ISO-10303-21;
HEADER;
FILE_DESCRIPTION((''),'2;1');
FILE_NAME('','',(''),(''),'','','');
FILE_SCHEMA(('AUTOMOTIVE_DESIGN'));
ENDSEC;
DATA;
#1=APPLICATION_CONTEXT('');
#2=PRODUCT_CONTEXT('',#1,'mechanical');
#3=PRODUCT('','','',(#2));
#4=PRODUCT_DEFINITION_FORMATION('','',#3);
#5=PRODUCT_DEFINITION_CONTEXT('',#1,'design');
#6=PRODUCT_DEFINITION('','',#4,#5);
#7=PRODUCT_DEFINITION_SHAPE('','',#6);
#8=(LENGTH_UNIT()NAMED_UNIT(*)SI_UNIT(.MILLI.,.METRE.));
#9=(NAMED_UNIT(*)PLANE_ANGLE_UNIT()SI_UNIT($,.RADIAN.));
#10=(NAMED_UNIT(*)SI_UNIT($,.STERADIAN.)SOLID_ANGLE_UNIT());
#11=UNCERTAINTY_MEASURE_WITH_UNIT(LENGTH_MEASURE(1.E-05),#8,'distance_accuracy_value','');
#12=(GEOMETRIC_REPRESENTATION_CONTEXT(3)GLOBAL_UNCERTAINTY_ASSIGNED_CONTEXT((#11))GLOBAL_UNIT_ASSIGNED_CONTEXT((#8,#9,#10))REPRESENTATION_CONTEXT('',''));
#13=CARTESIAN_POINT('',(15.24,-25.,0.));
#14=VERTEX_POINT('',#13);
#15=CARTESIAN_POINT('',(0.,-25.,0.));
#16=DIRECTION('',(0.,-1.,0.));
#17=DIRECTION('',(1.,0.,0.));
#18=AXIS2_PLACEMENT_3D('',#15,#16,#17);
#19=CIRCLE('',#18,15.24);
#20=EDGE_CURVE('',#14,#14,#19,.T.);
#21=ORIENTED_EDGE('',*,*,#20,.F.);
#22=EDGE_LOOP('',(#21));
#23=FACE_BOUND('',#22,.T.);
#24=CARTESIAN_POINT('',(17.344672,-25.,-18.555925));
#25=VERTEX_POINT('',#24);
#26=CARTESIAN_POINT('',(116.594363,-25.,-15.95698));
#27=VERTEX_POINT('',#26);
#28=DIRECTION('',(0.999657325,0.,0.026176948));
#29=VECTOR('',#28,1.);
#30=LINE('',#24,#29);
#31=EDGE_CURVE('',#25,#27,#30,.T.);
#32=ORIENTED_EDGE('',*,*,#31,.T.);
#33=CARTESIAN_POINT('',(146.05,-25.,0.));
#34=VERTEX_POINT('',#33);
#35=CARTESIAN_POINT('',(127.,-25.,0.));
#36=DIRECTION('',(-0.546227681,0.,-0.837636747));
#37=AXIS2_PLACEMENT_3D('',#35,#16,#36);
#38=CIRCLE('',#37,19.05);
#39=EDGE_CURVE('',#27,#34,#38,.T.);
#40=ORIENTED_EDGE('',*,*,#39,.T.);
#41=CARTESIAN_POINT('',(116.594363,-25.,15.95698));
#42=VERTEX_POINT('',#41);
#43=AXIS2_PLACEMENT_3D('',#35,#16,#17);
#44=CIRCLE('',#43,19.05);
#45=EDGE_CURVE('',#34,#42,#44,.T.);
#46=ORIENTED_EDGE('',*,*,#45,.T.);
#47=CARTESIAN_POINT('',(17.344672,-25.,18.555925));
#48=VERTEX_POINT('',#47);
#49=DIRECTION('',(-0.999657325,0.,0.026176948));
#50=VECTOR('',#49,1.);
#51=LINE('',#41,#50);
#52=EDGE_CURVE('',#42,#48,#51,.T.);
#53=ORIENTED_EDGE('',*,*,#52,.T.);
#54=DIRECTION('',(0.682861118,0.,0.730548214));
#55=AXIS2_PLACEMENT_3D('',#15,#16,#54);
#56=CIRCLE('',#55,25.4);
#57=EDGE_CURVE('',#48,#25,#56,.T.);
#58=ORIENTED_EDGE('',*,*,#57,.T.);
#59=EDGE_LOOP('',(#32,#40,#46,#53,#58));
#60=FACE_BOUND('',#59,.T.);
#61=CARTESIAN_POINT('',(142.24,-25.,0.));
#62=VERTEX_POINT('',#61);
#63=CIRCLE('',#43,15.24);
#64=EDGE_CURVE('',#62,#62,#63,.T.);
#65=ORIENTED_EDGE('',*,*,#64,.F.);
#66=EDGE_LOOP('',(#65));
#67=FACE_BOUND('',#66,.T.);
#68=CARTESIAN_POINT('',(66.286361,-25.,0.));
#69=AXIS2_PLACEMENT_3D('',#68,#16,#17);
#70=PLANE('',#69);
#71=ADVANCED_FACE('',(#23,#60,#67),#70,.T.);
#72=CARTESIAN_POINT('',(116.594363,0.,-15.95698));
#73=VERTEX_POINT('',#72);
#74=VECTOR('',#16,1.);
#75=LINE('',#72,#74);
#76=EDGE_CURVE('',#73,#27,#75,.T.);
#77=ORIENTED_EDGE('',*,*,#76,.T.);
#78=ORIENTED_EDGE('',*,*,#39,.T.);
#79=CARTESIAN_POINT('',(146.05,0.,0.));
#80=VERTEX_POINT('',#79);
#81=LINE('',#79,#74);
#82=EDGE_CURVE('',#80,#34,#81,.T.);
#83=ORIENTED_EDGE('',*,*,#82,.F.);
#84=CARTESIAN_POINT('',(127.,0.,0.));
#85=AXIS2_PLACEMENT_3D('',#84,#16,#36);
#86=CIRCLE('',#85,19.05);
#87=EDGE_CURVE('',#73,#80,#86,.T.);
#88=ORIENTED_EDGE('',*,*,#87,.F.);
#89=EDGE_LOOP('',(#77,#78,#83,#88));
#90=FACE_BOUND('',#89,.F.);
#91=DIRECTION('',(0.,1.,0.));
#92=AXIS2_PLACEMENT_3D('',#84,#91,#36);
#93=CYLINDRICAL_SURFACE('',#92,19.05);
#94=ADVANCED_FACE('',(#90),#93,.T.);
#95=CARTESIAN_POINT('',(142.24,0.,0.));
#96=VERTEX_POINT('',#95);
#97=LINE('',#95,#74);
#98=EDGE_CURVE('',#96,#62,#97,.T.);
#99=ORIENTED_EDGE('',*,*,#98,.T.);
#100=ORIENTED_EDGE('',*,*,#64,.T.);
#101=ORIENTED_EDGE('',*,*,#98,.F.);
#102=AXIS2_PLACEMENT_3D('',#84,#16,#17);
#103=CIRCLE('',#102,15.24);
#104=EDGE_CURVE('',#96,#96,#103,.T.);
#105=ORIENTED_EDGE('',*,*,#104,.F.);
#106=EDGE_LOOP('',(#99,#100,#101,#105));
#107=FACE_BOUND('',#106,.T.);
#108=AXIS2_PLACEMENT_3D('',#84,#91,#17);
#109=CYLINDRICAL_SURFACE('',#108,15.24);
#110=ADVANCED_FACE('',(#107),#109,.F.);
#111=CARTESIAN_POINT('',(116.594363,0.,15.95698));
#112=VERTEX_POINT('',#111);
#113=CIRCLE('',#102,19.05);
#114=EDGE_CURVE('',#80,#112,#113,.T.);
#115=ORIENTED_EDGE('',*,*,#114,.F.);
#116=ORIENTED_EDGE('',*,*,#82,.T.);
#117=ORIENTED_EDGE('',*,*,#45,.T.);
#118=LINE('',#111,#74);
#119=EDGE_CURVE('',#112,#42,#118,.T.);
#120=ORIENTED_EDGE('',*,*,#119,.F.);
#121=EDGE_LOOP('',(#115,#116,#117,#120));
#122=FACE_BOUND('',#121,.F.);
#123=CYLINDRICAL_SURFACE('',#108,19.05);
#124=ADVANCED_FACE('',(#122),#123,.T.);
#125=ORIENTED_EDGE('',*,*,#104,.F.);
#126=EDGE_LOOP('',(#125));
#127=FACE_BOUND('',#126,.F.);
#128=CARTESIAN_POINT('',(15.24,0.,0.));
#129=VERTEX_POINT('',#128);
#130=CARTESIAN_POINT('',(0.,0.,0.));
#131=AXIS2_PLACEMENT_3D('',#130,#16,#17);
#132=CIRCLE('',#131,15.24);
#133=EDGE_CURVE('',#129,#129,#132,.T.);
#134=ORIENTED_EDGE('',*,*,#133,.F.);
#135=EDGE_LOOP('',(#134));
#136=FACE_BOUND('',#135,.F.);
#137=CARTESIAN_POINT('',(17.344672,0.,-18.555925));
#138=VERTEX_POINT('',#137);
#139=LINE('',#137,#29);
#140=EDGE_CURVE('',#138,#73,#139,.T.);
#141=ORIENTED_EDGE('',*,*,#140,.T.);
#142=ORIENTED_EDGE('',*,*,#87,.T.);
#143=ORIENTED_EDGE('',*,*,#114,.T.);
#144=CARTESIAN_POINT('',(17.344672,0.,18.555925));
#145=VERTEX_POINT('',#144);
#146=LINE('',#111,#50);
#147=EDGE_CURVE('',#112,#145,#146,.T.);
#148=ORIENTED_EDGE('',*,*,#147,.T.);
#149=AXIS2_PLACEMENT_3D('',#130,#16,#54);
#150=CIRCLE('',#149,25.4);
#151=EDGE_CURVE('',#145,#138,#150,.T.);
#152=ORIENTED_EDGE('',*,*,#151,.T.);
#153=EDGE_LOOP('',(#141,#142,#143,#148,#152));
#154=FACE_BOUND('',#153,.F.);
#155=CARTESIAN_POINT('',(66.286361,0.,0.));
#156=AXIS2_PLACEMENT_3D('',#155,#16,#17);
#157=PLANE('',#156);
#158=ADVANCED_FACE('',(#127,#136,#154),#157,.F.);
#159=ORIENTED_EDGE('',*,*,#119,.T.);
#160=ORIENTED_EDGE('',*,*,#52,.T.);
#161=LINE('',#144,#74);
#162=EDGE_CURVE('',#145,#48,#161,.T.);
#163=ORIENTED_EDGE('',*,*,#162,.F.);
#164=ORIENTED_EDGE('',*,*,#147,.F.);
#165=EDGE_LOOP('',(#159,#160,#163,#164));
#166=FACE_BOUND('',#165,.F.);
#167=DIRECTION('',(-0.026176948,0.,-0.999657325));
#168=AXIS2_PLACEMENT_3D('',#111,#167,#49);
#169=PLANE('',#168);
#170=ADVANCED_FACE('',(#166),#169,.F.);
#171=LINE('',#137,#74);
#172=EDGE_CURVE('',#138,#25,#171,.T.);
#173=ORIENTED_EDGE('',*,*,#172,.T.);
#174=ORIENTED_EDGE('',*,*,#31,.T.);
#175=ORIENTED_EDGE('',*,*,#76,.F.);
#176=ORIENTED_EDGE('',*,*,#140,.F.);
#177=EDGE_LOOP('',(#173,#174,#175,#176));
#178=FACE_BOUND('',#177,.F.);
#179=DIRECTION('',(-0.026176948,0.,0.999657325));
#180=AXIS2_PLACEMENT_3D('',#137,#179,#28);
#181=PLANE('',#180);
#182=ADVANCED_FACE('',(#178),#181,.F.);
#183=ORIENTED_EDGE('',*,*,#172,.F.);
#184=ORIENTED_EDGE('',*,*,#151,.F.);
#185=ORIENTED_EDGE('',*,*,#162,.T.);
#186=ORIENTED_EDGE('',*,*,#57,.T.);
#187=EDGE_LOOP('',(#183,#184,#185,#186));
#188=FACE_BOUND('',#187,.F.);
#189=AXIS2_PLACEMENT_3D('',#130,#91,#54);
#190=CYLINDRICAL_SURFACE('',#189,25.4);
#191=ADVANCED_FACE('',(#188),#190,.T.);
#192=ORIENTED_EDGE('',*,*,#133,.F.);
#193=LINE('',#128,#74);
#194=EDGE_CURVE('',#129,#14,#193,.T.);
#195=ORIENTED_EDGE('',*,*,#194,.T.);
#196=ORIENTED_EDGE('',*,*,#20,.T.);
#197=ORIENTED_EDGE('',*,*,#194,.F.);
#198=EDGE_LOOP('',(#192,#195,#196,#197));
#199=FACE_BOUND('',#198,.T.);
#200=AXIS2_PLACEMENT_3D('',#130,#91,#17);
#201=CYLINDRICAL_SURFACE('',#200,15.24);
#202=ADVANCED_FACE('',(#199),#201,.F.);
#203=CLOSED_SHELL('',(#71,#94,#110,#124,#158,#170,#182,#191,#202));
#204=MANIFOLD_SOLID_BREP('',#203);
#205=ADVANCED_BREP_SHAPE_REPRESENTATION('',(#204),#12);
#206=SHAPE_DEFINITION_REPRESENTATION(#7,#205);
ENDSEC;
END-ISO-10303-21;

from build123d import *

# Parameters (mm, degrees)
F0_R     = 15.24
F1_DEPTH = 25


# Not quite as in the source:
# - a feature names something its author has since deleted; it is built from what else it names


with BuildPart() as f1:
    # F0 (on Front) → F1 (new body)
    with BuildSketch(Plane.XZ):
        with BuildLine():
            ThreePointArc((17.3446724068, 18.5559246361), (23.2992991218, 10.1144777637), (25.4, 0))
            ThreePointArc((25.4, 0), (23.2992991218, -10.1144777637), (17.3446724068, -18.5559246361))
            Line((17.3446724068, -18.5559246361), (116.5943626679, -15.9569800311))
            ThreePointArc((116.5943626679, -15.9569800311), (107.95, 0), (116.5943626679, 15.9569800311))
            Line((116.5943626679, 15.9569800311), (17.3446724068, 18.5559246361))
        make_face()
        with BuildLine():
            ThreePointArc((17.3446724068, -18.5559246361), (23.2992991218, -10.1144777637), (25.4, 0))
            ThreePointArc((25.4, 0), (23.2992991218, 10.1144777637), (17.3446724068, 18.5559246361))
            ThreePointArc((17.3446724068, 18.5559246361), (-25.4, 0), (17.3446724068, -18.5559246361))
        make_face()
        Circle(F0_R, mode=Mode.SUBTRACT)
        with BuildLine():
            ThreePointArc((146.05, 0), (136.0740043207, 16.7500730025), (116.5943626679, 15.9569800311))
            ThreePointArc((116.5943626679, 15.9569800311), (107.95, 0), (116.5943626679, -15.9569800311))
            ThreePointArc((116.5943626679, -15.9569800311), (136.0740043207, -16.7500730025), (146.05, 0))
        make_face()
        with Locations((127, 0)):
            Circle(F0_R, mode=Mode.SUBTRACT)
    extrude(amount=F1_DEPTH)


solid = f1.part
